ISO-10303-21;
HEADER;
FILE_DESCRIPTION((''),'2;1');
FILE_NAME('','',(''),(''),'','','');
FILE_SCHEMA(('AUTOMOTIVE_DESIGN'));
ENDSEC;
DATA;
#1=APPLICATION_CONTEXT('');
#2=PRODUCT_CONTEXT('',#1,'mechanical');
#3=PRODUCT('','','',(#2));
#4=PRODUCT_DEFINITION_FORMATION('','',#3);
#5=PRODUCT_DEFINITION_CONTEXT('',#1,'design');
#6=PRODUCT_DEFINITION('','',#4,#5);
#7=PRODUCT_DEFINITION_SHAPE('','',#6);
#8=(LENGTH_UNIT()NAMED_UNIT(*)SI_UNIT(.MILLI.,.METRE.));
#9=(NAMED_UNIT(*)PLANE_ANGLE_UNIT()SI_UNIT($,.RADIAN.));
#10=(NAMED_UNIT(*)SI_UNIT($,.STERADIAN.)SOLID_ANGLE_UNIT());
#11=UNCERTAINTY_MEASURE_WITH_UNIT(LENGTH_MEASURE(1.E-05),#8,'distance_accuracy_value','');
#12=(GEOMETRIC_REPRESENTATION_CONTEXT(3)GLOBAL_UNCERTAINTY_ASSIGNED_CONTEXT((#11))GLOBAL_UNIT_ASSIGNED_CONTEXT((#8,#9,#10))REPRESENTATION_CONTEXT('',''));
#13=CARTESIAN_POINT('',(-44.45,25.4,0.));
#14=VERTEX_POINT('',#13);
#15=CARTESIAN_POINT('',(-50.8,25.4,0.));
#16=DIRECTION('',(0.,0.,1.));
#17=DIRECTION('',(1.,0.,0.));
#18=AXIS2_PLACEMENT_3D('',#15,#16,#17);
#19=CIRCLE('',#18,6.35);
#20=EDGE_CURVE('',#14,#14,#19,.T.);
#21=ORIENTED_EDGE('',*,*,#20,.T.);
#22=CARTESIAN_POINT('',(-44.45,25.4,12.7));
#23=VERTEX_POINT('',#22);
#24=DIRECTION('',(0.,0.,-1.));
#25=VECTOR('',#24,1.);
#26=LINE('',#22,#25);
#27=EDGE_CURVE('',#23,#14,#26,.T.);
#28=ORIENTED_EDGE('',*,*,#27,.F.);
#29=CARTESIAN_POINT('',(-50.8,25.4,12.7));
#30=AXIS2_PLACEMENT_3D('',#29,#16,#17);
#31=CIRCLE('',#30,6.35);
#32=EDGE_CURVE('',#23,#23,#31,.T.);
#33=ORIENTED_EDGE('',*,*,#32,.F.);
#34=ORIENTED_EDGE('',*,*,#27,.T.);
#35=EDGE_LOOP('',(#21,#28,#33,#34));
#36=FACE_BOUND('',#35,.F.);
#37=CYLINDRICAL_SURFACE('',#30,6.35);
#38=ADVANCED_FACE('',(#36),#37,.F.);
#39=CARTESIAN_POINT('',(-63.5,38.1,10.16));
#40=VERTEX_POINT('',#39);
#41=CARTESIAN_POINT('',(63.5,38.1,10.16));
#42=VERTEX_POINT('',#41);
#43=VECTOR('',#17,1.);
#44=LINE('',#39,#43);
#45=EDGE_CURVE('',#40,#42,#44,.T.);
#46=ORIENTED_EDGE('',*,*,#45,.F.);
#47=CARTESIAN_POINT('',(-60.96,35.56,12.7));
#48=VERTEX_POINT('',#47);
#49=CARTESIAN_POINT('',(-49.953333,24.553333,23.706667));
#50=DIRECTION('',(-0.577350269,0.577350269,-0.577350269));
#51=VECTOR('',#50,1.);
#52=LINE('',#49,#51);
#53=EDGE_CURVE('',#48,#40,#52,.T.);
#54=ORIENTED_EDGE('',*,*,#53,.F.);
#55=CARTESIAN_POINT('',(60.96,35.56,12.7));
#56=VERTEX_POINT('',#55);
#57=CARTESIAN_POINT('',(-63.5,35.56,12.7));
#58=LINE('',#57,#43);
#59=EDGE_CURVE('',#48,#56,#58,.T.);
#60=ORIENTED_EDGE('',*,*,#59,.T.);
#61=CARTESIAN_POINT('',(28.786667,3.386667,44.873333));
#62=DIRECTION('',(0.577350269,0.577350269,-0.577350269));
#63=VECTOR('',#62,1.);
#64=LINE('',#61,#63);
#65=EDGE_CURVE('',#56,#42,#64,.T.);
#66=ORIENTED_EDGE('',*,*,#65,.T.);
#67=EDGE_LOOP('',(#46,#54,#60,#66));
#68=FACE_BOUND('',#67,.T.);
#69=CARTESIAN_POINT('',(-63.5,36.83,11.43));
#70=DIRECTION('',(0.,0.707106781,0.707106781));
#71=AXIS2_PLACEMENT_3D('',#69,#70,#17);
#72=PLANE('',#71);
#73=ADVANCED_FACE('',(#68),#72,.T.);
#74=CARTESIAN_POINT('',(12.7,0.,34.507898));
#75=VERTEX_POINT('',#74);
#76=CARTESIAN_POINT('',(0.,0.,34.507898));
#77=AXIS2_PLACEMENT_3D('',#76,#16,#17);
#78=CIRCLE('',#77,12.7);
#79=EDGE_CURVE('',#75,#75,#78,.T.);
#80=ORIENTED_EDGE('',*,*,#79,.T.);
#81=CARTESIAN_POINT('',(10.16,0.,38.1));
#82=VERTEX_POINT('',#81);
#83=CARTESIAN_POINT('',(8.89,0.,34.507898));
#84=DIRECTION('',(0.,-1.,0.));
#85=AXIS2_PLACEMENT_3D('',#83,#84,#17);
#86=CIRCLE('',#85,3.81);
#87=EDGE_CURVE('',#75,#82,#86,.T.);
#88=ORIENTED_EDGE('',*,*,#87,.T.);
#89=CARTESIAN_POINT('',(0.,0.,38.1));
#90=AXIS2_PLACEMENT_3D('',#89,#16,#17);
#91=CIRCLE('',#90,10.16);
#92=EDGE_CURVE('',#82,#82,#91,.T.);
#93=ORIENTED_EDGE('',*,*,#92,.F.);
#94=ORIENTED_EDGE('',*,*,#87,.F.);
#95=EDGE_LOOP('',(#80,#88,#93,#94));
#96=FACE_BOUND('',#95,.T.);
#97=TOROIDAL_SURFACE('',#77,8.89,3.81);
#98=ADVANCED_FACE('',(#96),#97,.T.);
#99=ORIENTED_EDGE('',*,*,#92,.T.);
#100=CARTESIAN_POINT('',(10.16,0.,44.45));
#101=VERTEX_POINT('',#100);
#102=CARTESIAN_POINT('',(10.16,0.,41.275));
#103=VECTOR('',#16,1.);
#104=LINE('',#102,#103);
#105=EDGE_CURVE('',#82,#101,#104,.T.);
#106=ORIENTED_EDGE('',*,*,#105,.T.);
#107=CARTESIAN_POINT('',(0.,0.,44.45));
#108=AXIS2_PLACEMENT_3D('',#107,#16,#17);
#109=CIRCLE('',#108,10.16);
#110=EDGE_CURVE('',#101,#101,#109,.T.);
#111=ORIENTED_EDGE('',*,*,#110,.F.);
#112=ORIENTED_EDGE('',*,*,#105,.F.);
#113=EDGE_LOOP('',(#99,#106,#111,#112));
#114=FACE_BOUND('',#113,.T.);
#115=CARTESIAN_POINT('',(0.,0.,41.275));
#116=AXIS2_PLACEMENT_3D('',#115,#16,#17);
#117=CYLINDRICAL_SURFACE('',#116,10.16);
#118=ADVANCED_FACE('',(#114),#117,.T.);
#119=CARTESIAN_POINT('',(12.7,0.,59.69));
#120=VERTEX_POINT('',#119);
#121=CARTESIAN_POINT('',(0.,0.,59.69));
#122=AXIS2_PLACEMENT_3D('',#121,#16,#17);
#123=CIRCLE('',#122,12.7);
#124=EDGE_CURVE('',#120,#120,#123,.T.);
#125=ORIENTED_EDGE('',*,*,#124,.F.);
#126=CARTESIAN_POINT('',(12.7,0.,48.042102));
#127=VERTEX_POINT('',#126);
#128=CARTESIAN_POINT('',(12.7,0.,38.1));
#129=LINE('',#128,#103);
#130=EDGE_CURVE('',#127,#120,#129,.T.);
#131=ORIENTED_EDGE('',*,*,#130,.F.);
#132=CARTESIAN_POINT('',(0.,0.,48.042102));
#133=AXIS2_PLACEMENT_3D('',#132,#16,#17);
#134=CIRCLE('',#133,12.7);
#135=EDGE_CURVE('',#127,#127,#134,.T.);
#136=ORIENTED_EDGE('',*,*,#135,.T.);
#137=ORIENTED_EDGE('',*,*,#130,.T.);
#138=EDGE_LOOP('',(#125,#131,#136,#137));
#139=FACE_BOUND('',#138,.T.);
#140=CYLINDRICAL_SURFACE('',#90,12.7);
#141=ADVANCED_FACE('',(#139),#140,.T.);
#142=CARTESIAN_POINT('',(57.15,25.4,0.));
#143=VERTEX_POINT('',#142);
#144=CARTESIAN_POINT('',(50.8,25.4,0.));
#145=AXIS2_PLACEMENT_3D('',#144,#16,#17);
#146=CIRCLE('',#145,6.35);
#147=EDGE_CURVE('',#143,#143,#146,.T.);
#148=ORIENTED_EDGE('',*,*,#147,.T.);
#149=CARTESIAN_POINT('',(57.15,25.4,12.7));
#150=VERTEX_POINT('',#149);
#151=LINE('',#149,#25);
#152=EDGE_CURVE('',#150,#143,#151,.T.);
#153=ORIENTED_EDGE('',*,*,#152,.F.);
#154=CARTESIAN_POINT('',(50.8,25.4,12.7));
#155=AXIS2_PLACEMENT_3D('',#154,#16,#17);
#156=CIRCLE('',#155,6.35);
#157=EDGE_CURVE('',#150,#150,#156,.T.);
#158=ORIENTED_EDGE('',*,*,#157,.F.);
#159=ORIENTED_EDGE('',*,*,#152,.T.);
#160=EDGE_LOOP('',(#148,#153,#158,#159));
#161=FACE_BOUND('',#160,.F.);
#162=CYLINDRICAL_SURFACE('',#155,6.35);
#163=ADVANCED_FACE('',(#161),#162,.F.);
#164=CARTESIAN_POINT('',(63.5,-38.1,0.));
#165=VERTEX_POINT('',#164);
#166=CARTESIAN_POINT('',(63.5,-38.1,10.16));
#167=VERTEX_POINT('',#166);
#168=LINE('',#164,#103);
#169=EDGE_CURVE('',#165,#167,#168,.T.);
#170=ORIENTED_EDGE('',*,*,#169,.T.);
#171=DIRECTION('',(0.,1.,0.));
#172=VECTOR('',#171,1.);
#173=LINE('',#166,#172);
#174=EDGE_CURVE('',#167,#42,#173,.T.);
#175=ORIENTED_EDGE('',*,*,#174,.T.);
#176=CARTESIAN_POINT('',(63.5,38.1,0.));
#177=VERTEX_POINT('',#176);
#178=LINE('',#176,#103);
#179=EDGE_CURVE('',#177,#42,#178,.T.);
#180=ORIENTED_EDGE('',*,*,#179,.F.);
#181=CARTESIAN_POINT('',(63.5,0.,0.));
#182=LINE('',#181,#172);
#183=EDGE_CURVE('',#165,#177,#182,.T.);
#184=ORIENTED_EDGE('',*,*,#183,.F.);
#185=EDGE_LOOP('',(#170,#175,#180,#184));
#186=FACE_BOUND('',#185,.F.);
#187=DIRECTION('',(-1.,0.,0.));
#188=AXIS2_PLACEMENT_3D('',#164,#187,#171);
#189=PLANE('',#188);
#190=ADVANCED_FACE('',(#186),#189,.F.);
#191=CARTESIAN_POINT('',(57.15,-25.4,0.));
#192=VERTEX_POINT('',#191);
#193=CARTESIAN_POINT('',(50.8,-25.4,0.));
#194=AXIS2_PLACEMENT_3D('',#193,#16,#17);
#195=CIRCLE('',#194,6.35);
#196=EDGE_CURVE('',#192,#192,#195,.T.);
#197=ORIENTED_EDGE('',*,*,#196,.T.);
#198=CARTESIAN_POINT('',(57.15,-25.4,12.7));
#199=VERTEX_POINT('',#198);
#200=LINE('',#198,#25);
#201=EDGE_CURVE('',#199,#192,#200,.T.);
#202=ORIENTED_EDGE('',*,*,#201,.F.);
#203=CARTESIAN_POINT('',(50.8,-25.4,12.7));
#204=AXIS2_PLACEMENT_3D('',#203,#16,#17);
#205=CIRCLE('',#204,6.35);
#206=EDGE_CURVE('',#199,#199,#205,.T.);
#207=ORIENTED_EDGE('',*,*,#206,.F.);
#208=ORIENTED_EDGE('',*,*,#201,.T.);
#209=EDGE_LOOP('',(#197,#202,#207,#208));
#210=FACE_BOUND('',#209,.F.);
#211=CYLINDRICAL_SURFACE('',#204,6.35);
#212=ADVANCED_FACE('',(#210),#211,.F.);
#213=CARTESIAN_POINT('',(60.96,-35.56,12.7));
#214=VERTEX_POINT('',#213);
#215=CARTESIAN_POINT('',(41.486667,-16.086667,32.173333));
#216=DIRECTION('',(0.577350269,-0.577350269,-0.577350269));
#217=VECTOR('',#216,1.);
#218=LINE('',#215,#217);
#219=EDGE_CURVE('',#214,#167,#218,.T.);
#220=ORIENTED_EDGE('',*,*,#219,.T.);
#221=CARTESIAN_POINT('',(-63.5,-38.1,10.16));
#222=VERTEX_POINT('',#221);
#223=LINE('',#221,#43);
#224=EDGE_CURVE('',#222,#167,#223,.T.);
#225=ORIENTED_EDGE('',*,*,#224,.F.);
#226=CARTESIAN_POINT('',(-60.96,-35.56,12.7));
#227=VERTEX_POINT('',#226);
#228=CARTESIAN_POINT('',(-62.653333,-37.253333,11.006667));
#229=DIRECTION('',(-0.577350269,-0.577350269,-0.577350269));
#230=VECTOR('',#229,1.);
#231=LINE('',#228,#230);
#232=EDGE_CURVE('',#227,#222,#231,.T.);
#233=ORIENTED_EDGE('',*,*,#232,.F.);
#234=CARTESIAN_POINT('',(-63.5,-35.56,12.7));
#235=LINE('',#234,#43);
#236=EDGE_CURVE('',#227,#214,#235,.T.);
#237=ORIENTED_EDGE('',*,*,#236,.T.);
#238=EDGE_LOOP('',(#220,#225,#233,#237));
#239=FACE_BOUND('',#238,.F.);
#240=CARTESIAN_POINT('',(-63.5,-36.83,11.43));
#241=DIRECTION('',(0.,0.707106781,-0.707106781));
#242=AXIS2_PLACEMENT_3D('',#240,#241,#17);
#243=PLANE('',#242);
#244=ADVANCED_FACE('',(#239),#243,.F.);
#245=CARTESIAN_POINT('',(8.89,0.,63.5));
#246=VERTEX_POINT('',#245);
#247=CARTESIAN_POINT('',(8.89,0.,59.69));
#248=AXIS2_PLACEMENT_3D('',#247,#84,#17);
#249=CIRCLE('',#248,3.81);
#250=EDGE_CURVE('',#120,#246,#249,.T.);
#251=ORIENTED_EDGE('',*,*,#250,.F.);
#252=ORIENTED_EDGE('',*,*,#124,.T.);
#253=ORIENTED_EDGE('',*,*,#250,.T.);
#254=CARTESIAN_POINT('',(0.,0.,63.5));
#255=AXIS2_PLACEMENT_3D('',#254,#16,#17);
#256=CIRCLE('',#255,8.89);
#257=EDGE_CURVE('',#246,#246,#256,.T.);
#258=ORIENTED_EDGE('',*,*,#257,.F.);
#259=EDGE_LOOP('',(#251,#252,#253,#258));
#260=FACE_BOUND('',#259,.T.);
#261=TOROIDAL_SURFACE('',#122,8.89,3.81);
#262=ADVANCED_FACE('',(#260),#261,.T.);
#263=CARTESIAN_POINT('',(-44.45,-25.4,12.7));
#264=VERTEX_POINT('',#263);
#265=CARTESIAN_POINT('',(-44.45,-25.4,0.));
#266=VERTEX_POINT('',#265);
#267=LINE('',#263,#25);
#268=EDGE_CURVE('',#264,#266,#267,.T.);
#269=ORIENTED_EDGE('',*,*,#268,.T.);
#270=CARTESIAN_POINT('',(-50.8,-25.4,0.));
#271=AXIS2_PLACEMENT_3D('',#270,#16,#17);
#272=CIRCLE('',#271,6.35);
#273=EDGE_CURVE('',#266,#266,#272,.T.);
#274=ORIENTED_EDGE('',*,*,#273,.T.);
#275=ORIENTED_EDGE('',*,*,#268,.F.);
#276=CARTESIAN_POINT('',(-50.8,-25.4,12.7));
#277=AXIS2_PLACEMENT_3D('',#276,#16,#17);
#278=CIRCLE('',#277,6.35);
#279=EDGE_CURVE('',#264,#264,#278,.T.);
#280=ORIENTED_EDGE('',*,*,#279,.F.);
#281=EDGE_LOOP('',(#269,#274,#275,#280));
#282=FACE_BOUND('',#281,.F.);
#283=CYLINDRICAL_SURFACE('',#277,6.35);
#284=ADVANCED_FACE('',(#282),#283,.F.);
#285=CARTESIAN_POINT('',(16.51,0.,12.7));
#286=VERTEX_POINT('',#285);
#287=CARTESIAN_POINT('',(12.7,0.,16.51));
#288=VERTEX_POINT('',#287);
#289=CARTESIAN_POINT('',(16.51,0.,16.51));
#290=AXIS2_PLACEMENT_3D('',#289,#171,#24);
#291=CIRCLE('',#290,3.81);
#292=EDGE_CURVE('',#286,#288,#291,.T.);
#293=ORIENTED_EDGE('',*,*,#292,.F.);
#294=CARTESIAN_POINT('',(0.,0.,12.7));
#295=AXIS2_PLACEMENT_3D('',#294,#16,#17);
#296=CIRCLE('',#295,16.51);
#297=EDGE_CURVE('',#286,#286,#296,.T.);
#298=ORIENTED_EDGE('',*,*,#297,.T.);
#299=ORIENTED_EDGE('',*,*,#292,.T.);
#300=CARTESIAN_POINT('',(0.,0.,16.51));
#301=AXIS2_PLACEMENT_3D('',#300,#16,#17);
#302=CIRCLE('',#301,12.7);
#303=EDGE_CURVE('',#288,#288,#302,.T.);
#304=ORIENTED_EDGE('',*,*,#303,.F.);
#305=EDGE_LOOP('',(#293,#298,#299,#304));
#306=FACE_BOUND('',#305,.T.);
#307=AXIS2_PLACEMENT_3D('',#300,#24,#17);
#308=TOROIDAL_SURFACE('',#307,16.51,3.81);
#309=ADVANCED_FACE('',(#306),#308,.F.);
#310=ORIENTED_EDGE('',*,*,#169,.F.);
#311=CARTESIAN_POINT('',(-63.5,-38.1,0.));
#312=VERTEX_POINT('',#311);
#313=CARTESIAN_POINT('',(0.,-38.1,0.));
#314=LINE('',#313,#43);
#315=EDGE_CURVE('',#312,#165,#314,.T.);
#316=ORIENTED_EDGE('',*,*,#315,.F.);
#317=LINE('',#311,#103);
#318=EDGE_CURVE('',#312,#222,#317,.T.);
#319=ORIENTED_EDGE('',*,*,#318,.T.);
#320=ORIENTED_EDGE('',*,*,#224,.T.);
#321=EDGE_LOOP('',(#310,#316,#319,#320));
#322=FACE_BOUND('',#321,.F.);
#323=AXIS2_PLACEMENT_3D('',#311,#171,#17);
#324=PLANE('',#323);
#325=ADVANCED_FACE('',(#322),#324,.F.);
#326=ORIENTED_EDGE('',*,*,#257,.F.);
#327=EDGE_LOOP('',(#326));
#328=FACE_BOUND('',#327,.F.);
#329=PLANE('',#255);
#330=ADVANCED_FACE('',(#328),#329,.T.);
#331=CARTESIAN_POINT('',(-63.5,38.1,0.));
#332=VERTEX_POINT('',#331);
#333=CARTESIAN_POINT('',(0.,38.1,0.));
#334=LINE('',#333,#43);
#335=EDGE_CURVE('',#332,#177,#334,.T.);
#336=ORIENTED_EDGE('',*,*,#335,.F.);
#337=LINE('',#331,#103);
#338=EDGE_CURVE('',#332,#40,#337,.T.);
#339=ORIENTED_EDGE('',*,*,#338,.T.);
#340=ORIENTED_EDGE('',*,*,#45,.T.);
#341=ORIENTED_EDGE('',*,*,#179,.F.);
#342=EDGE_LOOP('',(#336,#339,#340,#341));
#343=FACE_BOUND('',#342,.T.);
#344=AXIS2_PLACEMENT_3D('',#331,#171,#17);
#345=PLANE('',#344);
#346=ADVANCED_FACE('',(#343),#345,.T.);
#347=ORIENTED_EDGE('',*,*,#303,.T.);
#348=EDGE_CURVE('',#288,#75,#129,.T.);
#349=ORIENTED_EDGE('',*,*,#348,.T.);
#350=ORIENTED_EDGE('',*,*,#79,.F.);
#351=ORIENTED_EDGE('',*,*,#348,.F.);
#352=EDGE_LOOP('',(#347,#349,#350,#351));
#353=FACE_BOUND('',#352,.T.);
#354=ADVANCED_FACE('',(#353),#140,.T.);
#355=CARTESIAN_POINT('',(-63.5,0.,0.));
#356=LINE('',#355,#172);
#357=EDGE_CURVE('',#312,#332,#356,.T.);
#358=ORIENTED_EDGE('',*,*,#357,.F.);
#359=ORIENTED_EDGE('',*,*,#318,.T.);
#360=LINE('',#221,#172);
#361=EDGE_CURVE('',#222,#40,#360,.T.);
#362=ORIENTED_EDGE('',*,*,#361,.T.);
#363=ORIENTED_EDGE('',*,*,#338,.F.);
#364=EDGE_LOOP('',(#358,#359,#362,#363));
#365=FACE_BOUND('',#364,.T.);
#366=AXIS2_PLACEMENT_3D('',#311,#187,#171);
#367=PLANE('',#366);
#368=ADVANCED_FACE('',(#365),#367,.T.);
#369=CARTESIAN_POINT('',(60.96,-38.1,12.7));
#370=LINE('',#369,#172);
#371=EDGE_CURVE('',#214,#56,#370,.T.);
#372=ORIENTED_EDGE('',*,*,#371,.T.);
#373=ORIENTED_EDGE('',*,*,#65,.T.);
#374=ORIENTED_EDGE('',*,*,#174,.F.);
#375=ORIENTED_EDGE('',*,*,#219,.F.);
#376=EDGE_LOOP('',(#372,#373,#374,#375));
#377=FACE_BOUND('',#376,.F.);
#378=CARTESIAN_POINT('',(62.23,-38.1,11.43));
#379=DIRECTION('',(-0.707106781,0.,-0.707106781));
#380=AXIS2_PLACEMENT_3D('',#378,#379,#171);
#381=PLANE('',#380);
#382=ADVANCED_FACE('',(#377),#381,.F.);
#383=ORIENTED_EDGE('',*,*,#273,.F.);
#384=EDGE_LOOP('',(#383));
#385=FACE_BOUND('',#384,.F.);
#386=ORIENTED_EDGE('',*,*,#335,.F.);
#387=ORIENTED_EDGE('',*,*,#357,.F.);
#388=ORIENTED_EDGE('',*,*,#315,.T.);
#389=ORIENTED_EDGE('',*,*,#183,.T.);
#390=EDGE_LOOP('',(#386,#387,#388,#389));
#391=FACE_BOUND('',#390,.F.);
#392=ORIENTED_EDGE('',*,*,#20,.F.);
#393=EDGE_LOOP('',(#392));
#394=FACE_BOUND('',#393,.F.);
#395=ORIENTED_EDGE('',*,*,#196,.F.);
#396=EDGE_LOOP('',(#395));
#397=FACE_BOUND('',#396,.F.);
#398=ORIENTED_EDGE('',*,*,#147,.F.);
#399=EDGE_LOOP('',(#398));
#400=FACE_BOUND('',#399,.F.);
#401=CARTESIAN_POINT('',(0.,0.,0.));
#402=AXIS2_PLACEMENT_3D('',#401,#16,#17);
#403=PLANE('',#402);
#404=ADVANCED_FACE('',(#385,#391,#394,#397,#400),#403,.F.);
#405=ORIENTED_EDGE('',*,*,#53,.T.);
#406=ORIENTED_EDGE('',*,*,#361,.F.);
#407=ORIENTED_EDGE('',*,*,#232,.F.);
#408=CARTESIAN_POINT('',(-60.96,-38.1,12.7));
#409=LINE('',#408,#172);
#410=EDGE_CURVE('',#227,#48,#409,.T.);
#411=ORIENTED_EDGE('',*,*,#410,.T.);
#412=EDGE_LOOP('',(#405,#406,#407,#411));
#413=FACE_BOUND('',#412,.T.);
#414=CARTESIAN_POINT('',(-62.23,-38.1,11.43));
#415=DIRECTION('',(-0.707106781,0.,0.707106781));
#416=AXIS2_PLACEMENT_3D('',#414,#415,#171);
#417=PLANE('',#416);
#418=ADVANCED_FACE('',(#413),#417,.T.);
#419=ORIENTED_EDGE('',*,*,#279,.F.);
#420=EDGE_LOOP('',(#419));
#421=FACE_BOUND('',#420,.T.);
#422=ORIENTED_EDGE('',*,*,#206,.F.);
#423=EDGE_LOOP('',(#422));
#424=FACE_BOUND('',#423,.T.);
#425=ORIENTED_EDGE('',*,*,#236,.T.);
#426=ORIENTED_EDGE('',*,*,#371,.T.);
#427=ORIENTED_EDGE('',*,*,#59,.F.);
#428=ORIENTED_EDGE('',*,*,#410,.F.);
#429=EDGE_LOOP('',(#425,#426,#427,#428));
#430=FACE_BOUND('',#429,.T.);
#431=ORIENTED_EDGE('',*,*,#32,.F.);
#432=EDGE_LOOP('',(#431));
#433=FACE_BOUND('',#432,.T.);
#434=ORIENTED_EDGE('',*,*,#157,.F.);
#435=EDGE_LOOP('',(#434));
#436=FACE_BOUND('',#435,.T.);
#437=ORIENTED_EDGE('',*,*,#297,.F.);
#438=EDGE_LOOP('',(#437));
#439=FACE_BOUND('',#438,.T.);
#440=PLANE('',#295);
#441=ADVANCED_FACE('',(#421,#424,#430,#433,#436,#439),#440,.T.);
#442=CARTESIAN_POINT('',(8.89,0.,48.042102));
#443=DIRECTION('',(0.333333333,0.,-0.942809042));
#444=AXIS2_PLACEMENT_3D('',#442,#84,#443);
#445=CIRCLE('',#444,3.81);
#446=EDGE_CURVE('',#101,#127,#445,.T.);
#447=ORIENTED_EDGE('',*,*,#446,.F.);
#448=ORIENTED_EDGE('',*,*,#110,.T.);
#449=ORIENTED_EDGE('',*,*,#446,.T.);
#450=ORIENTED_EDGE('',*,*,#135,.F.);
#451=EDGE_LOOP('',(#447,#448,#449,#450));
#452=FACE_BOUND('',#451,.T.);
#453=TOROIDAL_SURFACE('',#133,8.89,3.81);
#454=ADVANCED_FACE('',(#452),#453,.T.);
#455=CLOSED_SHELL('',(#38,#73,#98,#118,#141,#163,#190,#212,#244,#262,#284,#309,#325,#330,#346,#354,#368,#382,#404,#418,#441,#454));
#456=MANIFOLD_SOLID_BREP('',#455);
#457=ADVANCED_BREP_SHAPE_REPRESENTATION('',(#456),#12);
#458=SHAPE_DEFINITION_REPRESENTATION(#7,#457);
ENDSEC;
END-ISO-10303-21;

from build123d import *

# Parameters (mm, degrees)
F0_W     = 127
F0_H     = 76.2
F1_DEPTH = 12.7
F2_R     = 6.35
F3_DEPTH = 12.7
F4_W     = 12.7
F4_H     = 50.8
F6_W     = 7.1040334281
F6_H     = 6.35
F9_SIZE  = 2.54


# Not quite as in the source:
# - a fillet or chamfer that OpenCascade refuses, or shapes differently, is made with other operations: its cross-section is extruded or revolved along the edge and cut away or added


with BuildPart() as f1:
    # F0 (on Top) → F1 (new body)
    with BuildSketch(Plane.XY):
        Rectangle(F0_W, F0_H)
    extrude(amount=F1_DEPTH)

    # F2 (on face) → F3 (cut, through all)
    with BuildSketch(Plane.XY.offset(12.7)):
        with Locations((-50.8, 25.4)):
            Circle(F2_R)
        with Locations((-50.8, -25.4)):
            Circle(F2_R)
        with Locations((50.8, -25.4)):
            Circle(F2_R)
        with Locations((50.8, 25.4)):
            Circle(F2_R)
    extrude(amount=-F3_DEPTH, mode=Mode.SUBTRACT)

    # F4 (on Front) → F5 (revolve)
    with BuildSketch(Plane.XZ):
        with Locations((6.35, 38.1)):
            Rectangle(F4_W, F4_H)
    revolve(axis=Axis((0, 0, 38.1), (0, 0, 1)))

    # F6 (on Front) → F7 (revolve, cut)
    with BuildSketch(Plane.XZ):
        with Locations((13.712016714, 41.275)):
            Rectangle(F6_W, F6_H)
    revolve(axis=Axis((0, 0, 12.7), (0, 0, 1)), mode=Mode.SUBTRACT)

    # F8: fillet of radius 3.81 on 4 edges, made by hand

    # F8_s1 → F8_t2 (revolve)
    with BuildSketch(Plane.XZ):
        with BuildLine():
            ThreePointArc((16.51, 12.7), (13.8159231637, 13.8159231637), (12.7, 16.51))
            Line((12.7, 16.51), (12.7, 12.7))
            Line((12.7, 12.7), (16.51, 12.7))
        make_face()
    revolve(axis=Axis((0, 0, 12.7), (0, 0, 1)))

    # F8_s3 → F8_t4 (revolve, cut)
    with BuildSketch(Plane.XZ):
        with BuildLine():
            ThreePointArc((12.7, 34.5078975516), (12.0008519733, 36.7076020772), (10.16, 38.1))
            Line((10.16, 38.1), (12.7, 38.1))
            Line((12.7, 38.1), (12.7, 34.5078975516))
        make_face()
    revolve(axis=Axis((0, 0, 38.1), (0, 0, 1)), mode=Mode.SUBTRACT)

    # F8_s5 → F8_t6 (revolve, cut)
    with BuildSketch(Plane.XZ):
        with BuildLine():
            ThreePointArc((10.16, 44.45), (12.0008519733, 45.8423979228), (12.7, 48.0421024484))
            Line((12.7, 48.0421024484), (12.7, 44.45))
            Line((12.7, 44.45), (10.16, 44.45))
        make_face()
    revolve(axis=Axis((0, 0, 44.45), (0, 0, 1)), mode=Mode.SUBTRACT)

    # F8_s7 → F8_t8 (revolve, cut)
    with BuildSketch(Plane.XZ):
        with BuildLine():
            ThreePointArc((12.7, 59.69), (11.5840768363, 62.3840768363), (8.89, 63.5))
            Line((8.89, 63.5), (12.7, 63.5))
            Line((12.7, 63.5), (12.7, 59.69))
        make_face()
    revolve(axis=Axis((0, 0, 63.5), (0, 0, 1)), mode=Mode.SUBTRACT)

    # F9
    f9_edges = [f1.edges().sort_by_distance(p)[0] for p in [
        (0, -38.1, 12.7),
        (-63.5, 0, 12.7),
        (63.5, 0, 12.7),
        (0, 38.1, 12.7),
    ]]
    chamfer(f9_edges, length=F9_SIZE)


solid = f1.part
